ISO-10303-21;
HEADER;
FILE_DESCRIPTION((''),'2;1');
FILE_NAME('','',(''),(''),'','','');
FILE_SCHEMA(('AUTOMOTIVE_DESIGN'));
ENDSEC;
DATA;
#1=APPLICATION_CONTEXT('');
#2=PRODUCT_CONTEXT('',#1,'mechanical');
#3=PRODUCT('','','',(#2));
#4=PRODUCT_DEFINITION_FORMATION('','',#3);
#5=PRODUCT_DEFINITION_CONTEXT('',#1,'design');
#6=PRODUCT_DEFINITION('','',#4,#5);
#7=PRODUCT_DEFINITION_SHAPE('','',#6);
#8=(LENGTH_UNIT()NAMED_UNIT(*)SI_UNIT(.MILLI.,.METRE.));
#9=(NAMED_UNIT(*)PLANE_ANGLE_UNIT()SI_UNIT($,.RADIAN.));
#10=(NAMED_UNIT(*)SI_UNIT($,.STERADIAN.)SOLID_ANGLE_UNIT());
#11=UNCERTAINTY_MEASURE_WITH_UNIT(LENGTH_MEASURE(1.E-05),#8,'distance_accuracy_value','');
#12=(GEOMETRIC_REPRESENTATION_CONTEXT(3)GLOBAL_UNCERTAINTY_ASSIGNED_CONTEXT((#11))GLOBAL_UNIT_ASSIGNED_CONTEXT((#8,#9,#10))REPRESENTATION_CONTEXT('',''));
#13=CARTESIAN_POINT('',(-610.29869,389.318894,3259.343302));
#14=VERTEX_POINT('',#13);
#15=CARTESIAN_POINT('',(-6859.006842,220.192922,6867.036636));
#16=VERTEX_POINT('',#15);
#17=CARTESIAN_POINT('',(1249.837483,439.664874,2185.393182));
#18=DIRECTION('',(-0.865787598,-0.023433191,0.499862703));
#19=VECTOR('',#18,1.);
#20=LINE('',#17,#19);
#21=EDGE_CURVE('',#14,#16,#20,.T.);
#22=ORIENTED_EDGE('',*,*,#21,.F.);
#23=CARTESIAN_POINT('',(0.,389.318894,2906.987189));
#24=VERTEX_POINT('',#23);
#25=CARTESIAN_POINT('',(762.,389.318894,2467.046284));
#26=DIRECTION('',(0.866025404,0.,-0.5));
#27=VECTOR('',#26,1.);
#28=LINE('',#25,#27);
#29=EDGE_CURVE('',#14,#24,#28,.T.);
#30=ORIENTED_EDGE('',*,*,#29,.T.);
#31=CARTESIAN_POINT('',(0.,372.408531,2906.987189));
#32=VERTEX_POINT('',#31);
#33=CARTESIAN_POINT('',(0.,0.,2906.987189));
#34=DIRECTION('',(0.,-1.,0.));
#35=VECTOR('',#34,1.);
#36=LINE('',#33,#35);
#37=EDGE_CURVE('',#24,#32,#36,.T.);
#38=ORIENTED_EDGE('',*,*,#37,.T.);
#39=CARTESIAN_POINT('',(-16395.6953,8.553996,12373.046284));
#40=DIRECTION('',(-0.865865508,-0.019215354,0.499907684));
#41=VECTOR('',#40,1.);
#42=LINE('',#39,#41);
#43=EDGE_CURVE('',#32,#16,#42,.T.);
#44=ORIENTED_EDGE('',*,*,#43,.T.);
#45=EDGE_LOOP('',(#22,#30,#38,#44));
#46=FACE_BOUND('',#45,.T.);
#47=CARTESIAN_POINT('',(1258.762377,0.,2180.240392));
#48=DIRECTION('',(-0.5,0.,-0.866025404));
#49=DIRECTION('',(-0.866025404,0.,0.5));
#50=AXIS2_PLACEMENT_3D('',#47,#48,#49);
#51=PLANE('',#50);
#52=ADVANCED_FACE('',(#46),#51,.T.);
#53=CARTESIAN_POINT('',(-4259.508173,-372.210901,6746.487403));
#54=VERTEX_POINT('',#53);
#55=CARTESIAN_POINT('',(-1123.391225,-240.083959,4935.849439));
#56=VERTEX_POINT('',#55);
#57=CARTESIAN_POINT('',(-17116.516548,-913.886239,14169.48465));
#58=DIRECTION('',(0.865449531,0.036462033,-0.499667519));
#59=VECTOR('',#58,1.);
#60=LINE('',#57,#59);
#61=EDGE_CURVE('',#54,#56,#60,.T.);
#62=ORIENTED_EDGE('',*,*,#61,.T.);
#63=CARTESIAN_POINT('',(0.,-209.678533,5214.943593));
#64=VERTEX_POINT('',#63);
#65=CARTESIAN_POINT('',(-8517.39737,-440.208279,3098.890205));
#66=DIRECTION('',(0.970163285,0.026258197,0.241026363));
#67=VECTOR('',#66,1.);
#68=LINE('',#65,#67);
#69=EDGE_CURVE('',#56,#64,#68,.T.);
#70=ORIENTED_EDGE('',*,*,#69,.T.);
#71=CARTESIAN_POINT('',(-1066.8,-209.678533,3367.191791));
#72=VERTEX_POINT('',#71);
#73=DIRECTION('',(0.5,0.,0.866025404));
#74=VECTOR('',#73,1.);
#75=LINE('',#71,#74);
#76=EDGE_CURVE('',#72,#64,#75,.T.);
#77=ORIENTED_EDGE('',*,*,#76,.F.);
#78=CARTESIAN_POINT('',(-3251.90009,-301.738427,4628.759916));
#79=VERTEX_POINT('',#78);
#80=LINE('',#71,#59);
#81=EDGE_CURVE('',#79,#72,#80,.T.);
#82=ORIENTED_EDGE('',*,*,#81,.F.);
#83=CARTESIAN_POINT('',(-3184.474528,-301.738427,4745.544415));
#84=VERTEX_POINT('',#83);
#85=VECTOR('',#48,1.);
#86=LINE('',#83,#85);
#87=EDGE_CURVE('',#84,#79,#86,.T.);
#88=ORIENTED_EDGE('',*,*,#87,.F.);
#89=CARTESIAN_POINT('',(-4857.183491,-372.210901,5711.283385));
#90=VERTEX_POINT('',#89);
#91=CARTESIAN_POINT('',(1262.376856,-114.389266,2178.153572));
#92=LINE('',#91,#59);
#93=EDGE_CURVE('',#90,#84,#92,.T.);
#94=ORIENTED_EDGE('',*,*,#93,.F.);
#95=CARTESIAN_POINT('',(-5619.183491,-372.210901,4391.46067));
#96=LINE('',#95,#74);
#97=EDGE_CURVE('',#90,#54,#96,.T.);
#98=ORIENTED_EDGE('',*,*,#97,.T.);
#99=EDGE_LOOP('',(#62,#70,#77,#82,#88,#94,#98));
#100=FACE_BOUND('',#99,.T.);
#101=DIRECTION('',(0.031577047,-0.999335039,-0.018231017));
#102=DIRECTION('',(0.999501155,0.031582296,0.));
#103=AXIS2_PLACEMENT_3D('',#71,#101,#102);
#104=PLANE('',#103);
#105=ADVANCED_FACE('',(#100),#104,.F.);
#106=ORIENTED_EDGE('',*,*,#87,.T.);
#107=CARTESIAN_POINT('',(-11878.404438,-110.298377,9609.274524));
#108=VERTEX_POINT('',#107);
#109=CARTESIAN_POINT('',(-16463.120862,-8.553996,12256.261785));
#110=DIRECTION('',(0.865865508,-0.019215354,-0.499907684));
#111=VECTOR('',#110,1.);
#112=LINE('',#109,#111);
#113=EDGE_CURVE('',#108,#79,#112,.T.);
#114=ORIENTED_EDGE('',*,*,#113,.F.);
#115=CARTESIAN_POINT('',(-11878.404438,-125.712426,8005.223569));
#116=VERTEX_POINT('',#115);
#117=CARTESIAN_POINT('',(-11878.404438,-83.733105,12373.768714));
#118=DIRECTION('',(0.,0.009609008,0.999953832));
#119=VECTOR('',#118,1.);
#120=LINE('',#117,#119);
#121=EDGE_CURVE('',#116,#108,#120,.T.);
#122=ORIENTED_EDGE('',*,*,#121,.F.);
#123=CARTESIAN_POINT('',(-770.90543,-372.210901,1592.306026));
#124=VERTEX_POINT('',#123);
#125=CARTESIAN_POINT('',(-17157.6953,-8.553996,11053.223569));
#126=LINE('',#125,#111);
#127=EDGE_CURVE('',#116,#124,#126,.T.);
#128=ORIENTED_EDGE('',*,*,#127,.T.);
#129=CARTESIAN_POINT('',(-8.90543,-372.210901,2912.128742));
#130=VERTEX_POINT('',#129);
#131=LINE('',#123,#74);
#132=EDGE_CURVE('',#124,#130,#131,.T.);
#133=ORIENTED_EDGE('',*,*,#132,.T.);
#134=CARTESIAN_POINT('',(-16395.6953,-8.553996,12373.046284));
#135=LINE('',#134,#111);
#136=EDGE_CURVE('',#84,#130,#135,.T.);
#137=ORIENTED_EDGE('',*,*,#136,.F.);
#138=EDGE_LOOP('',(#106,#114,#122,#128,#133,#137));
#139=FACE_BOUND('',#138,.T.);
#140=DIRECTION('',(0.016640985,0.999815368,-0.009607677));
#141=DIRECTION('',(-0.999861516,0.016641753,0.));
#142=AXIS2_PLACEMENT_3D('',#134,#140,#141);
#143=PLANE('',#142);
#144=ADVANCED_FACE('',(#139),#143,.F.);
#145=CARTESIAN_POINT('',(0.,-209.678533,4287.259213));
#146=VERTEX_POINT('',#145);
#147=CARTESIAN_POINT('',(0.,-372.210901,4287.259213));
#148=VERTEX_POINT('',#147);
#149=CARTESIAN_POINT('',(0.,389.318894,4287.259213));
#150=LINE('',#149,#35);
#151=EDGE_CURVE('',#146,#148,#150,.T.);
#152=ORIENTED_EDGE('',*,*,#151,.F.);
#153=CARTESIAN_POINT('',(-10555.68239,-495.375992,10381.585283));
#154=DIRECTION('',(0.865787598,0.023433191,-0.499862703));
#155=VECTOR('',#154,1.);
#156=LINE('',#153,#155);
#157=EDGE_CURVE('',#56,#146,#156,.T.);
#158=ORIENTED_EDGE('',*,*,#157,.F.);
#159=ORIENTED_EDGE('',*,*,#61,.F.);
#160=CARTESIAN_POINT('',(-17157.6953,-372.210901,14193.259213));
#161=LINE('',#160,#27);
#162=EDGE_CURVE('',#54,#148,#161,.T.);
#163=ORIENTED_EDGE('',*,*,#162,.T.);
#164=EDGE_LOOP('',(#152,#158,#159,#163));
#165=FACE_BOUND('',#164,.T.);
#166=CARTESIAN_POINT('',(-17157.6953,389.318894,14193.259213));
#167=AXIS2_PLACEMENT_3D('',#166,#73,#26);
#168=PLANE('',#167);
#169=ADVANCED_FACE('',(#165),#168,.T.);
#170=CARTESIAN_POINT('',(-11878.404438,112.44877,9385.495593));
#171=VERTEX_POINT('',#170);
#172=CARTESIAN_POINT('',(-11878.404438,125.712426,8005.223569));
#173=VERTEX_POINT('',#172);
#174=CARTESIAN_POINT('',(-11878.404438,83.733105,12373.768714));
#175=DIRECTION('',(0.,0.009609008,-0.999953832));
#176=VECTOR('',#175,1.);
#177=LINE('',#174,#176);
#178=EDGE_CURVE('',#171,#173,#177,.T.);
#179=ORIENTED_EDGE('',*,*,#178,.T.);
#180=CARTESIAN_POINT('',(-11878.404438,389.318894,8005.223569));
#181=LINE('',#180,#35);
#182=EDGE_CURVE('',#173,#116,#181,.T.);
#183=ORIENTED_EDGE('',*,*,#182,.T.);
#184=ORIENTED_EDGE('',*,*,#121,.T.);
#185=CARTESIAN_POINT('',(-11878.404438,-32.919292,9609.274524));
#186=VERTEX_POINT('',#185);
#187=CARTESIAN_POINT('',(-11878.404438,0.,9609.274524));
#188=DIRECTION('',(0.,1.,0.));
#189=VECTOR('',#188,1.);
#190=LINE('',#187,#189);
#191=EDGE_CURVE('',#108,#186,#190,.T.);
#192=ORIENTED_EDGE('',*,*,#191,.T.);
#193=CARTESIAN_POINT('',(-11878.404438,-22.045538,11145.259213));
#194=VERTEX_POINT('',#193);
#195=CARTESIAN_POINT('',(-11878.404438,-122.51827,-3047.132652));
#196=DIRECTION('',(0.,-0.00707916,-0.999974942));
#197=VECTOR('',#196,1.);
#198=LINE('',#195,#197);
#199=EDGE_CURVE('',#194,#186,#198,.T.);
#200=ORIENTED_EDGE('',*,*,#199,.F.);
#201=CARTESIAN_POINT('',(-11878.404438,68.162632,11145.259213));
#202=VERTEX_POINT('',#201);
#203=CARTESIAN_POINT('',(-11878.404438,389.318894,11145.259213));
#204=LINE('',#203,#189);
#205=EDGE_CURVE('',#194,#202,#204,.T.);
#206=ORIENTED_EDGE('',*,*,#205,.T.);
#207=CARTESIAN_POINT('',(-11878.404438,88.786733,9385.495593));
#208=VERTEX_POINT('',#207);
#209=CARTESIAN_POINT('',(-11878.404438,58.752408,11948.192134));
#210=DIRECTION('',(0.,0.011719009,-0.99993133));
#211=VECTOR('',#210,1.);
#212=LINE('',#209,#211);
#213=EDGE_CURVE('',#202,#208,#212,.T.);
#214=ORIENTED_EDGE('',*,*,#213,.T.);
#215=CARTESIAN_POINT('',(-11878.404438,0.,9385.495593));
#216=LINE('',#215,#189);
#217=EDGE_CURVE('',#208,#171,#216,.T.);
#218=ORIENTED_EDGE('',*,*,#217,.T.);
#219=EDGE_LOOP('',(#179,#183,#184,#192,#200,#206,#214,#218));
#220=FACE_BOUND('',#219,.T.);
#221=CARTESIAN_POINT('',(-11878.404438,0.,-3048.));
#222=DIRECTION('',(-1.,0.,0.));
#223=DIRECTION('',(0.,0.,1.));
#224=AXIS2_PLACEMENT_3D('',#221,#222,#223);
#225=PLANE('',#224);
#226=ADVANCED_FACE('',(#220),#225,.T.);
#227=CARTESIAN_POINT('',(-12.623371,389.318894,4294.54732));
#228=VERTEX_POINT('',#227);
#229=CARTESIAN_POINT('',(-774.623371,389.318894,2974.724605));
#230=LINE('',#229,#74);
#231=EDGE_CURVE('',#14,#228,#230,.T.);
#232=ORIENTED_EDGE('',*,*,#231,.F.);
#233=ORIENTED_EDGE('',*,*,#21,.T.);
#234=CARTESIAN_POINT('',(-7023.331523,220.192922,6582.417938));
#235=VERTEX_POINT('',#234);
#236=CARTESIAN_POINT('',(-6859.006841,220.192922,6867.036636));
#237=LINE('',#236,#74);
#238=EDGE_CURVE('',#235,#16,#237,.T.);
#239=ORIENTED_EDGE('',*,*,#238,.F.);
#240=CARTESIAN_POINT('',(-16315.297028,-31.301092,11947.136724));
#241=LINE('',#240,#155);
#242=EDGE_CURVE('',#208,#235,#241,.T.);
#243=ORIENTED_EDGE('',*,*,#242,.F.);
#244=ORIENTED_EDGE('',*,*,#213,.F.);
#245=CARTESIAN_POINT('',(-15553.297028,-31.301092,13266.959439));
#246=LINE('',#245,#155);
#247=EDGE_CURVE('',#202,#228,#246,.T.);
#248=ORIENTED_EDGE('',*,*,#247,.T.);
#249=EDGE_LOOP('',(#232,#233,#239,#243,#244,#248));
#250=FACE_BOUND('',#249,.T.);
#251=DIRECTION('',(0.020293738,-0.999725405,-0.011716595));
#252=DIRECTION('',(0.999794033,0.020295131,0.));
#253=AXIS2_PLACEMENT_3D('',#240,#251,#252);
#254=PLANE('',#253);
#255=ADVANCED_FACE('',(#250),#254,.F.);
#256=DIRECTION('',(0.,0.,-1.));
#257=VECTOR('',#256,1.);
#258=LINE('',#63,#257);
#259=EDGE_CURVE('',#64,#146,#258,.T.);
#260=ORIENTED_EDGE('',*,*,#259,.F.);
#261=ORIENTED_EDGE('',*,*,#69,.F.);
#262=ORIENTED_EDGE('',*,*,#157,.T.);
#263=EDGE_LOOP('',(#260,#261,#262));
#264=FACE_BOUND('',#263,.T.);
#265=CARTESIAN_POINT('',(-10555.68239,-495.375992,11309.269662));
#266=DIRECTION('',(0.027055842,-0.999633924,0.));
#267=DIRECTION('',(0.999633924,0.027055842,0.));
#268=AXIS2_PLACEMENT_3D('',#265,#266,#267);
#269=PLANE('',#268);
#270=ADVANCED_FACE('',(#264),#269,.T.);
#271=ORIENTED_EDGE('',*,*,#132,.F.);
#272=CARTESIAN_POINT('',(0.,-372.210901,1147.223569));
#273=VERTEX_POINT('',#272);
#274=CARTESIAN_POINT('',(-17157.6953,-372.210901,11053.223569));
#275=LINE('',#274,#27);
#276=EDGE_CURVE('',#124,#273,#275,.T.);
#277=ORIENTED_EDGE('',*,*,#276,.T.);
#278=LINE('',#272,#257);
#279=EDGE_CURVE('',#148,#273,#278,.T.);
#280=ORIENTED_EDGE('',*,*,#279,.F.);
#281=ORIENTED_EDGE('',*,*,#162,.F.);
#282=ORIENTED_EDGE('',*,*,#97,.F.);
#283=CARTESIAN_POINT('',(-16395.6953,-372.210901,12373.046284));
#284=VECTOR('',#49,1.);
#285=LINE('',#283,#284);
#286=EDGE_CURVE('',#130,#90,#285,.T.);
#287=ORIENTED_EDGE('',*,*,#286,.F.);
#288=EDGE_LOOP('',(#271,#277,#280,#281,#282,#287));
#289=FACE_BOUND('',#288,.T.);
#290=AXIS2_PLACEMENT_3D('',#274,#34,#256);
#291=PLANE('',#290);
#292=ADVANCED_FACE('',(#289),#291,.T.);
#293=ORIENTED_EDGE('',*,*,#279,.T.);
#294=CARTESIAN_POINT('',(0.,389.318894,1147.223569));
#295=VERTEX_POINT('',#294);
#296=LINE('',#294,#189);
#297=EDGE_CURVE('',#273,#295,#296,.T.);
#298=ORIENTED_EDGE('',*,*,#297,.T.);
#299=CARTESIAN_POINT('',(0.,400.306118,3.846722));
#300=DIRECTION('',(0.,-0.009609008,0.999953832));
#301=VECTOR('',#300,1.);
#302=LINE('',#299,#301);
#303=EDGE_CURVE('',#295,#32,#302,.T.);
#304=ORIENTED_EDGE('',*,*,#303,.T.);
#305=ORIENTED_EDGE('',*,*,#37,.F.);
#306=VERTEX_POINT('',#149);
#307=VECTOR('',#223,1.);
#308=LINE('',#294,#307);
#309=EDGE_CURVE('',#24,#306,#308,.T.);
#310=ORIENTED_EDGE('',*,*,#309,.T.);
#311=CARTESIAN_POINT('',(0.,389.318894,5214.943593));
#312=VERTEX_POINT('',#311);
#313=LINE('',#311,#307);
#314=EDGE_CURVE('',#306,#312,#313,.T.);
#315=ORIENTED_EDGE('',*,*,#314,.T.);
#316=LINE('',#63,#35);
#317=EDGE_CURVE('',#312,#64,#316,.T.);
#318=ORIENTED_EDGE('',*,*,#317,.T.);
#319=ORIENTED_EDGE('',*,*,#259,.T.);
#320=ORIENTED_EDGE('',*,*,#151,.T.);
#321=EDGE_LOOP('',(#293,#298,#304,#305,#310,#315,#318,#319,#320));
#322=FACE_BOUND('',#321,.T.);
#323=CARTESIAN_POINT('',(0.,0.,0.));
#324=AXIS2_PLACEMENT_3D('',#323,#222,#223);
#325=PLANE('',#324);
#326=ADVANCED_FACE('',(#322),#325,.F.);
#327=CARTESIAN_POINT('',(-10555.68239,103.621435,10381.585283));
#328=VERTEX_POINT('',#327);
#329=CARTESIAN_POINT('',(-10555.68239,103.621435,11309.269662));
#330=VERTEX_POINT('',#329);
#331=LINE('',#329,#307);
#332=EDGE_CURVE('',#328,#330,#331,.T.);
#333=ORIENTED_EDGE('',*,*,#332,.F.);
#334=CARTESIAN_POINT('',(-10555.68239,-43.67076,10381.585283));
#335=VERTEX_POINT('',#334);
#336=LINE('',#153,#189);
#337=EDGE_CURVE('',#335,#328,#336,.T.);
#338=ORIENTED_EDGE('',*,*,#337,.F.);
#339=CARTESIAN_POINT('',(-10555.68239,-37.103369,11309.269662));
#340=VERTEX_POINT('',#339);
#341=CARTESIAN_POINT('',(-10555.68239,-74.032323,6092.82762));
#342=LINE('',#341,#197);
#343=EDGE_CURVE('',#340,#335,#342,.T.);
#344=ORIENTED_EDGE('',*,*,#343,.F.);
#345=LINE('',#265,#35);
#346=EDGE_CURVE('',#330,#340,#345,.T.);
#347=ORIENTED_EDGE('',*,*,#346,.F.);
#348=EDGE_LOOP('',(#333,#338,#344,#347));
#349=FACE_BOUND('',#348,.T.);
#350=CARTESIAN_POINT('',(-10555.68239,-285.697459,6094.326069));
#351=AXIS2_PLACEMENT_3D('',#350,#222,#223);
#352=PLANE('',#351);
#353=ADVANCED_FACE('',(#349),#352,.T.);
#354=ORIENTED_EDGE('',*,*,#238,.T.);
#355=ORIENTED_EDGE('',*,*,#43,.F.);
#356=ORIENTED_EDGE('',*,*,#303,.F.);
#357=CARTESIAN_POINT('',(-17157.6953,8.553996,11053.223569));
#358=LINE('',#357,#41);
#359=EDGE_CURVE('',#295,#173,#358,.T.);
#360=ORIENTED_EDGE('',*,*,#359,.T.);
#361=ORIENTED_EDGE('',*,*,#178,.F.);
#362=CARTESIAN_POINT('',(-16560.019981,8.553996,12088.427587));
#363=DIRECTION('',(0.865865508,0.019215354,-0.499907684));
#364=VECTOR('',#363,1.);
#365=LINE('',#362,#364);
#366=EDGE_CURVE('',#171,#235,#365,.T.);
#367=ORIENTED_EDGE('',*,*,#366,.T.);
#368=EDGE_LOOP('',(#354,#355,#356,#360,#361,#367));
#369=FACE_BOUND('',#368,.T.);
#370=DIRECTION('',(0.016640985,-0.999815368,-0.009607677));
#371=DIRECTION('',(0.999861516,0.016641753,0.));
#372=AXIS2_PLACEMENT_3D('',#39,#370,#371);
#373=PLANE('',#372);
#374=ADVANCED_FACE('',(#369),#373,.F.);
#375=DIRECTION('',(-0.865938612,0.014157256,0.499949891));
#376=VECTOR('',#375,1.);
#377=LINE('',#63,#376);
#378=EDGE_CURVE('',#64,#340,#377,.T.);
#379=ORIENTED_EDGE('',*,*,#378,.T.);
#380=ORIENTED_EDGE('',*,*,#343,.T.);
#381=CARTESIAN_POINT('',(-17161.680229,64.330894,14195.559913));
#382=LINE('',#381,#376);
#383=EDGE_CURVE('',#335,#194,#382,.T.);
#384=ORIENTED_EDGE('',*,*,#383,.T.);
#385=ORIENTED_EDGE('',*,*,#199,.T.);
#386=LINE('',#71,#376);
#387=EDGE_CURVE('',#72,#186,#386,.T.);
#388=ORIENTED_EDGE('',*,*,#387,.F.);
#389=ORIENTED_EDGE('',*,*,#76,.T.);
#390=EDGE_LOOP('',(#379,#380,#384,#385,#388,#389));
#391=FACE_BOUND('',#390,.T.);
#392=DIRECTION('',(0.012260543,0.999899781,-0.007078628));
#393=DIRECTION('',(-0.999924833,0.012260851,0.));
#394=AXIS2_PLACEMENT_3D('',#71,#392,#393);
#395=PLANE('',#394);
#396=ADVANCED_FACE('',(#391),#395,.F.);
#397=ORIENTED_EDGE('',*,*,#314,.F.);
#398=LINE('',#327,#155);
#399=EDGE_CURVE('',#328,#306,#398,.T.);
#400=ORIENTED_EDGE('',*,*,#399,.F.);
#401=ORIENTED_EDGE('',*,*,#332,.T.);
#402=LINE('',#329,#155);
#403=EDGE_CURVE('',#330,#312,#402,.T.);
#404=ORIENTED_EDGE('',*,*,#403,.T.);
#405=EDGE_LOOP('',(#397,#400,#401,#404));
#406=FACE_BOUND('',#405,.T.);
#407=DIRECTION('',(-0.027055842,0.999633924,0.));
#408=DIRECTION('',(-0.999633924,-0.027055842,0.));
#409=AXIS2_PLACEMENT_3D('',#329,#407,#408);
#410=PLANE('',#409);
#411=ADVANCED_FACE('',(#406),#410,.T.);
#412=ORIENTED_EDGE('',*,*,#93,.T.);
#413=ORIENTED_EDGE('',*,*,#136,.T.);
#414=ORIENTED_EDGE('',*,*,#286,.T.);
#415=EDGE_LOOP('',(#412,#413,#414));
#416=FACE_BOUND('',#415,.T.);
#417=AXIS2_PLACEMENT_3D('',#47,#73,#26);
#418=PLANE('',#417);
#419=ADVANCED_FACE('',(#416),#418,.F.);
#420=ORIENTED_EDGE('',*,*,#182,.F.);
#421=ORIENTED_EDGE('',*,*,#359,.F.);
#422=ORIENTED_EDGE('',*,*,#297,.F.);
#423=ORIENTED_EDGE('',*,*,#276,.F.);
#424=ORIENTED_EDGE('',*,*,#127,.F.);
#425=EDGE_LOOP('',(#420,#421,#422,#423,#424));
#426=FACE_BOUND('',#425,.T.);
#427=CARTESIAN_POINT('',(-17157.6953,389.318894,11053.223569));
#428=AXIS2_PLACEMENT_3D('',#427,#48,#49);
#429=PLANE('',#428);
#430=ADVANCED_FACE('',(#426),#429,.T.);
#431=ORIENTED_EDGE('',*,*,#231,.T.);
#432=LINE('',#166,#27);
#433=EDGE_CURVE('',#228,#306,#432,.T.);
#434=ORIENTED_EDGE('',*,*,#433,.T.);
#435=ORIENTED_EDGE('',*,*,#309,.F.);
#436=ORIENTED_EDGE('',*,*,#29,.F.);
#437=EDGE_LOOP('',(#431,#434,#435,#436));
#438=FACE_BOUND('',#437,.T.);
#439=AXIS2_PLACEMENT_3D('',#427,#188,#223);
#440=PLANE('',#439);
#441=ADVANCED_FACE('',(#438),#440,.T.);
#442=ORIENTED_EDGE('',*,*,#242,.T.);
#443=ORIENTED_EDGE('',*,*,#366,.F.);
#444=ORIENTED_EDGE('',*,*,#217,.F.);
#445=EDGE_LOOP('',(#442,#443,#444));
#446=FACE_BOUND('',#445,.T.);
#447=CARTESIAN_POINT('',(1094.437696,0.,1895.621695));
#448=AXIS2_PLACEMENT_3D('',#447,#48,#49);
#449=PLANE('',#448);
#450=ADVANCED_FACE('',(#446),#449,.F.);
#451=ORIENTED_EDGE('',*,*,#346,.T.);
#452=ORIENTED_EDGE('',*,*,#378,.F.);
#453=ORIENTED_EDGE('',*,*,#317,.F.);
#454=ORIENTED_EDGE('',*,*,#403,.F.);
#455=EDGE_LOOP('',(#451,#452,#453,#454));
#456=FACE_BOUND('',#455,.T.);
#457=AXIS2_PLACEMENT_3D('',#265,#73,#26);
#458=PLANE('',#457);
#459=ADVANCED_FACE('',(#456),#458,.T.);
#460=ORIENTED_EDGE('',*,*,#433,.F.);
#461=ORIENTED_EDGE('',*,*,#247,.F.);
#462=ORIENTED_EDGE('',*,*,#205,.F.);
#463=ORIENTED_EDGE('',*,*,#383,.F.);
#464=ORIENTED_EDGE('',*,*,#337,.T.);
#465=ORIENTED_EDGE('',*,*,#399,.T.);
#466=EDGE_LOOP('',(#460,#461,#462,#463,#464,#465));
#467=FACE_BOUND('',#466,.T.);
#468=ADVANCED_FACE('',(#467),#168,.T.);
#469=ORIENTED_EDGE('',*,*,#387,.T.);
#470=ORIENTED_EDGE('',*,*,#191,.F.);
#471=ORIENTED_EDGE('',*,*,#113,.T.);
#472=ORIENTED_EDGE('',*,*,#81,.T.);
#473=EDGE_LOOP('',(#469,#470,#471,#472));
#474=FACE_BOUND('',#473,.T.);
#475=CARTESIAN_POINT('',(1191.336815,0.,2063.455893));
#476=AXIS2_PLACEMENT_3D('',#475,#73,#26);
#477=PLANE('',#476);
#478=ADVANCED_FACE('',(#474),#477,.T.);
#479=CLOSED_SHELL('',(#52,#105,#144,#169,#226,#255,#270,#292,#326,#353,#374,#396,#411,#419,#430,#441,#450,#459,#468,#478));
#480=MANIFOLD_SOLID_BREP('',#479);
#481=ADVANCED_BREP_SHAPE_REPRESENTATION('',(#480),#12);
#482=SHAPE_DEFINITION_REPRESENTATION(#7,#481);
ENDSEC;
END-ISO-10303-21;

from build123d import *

# Parameters (mm, degrees)
BOSS_EXTRUDE1_START = -372.210901238
BOSS_EXTRUDE1_DEPTH = 761.529795247
CUT_EXTRUDE8_DEPTH  = 1524
CUT_EXTRUDE9_DEPTH  = 1524
SKETCH14_W          = 3140.03564449
SKETCH14_H          = 761.529795247
CUT_EXTRUDE10_DEPTH = 6096
SKETCH15_W          = 927.684379614
SKETCH15_H          = 598.997426742
BOSS_EXTRUDE2_DEPTH = 12192
CUT_EXTRUDE11_DEPTH = 2133.6


# Read off the part's stored shape, not the designer's step: Boss-Extrude1
with BuildPart() as part:
    # Boss-Extrude1 outline → Boss-Extrude1 (new body)
    with BuildSketch(Plane(origin=(0, 0, 0), x_dir=(1, 0, 0), z_dir=(0, 1, 0)).offset(BOSS_EXTRUDE1_START)):
        Polygon((0, -4287.259213253), (0, -1147.223568763), (-17157.695299777, -11053.223568763), (-17157.695299777, -14193.259213253), align=None)
    extrude(amount=BOSS_EXTRUDE1_DEPTH)

    # Sketch11 → Cut-Extrude8 (cut)
    with BuildSketch(Plane(origin=(496.762377184, 0, 860.417676572), x_dir=(-0.8660254037844379, 0, 0.5000000000000013), z_dir=(-0.5000000000000013, 0, -0.8660254037844379))):
        Polygon((20385.611784381, 8.553996386), (573.611784381, 389.318894009), (20385.611784381, 389.318894009), align=None)
        Polygon((573.611784381, -389.318894009), (20385.611784381, -389.318894009), (20385.611784381, -8.553996386), align=None)
    extrude(amount=-CUT_EXTRUDE8_DEPTH, mode=Mode.SUBTRACT)

    # Sketch13 → Cut-Extrude9 (cut)
    with BuildSketch(Plane(origin=(1856.437695643, 0, 3215.444409939), x_dir=(0.8660254037844379, 0, -0.5000000000000013), z_dir=(0.5000000000000013, 0, 0.8660254037844379))):
        Polygon((-20103.030058221, -31.301091644), (-2158.205820406, 389.318894009), (-20103.030058221, 389.318894009), align=None)
        Polygon((-20103.123390842, -50.047095366), (-20107.311653405, -470.646228494), (-2163.37704262, -649.329215787), align=None)
    extrude(amount=-CUT_EXTRUDE9_DEPTH, mode=Mode.SUBTRACT)

    # Sketch14 → Cut-Extrude10 (cut, along a direction that is not the sketch's normal)
    with BuildSketch(Plane.ZY.offset(17157.695299777)):
        with Locations((12623.241391008, 8.553996385)):
            Rectangle(SKETCH14_W, SKETCH14_H)
    extrude(amount=-CUT_EXTRUDE10_DEPTH, dir=(-0.8660254037844379, 0, 0.5000000000000014), mode=Mode.SUBTRACT)

    # Sketch15 → Boss-Extrude2 (add, along a direction that is not the sketch's normal)
    with BuildSketch(Plane(origin=(0, 0, 0), x_dir=(0, 0, -1), z_dir=(1, 0, 0))):
        with Locations((-4751.10140306, 89.820180638)):
            Rectangle(SKETCH15_W, SKETCH15_H)
    extrude(amount=-BOSS_EXTRUDE2_DEPTH, dir=(0.8657875976161161, 0.02343319053858119, -0.49986270254470566))

    # Sketch16 → Cut-Extrude11 (cut)
    with BuildSketch(Plane(origin=(2258.136815363, 0, 3911.20769465), x_dir=(0.8660254037844379, 0, -0.5000000000000013), z_dir=(0.5000000000000012, 0, 0.8660254037844378))):
        Polygon((-2607.471796433, -209.678532733), (-24747.672389043, -1017.49242809), (-23543.041613872, 86.741395035), align=None)
    extrude(amount=-CUT_EXTRUDE11_DEPTH, mode=Mode.SUBTRACT)


solid = part.part
